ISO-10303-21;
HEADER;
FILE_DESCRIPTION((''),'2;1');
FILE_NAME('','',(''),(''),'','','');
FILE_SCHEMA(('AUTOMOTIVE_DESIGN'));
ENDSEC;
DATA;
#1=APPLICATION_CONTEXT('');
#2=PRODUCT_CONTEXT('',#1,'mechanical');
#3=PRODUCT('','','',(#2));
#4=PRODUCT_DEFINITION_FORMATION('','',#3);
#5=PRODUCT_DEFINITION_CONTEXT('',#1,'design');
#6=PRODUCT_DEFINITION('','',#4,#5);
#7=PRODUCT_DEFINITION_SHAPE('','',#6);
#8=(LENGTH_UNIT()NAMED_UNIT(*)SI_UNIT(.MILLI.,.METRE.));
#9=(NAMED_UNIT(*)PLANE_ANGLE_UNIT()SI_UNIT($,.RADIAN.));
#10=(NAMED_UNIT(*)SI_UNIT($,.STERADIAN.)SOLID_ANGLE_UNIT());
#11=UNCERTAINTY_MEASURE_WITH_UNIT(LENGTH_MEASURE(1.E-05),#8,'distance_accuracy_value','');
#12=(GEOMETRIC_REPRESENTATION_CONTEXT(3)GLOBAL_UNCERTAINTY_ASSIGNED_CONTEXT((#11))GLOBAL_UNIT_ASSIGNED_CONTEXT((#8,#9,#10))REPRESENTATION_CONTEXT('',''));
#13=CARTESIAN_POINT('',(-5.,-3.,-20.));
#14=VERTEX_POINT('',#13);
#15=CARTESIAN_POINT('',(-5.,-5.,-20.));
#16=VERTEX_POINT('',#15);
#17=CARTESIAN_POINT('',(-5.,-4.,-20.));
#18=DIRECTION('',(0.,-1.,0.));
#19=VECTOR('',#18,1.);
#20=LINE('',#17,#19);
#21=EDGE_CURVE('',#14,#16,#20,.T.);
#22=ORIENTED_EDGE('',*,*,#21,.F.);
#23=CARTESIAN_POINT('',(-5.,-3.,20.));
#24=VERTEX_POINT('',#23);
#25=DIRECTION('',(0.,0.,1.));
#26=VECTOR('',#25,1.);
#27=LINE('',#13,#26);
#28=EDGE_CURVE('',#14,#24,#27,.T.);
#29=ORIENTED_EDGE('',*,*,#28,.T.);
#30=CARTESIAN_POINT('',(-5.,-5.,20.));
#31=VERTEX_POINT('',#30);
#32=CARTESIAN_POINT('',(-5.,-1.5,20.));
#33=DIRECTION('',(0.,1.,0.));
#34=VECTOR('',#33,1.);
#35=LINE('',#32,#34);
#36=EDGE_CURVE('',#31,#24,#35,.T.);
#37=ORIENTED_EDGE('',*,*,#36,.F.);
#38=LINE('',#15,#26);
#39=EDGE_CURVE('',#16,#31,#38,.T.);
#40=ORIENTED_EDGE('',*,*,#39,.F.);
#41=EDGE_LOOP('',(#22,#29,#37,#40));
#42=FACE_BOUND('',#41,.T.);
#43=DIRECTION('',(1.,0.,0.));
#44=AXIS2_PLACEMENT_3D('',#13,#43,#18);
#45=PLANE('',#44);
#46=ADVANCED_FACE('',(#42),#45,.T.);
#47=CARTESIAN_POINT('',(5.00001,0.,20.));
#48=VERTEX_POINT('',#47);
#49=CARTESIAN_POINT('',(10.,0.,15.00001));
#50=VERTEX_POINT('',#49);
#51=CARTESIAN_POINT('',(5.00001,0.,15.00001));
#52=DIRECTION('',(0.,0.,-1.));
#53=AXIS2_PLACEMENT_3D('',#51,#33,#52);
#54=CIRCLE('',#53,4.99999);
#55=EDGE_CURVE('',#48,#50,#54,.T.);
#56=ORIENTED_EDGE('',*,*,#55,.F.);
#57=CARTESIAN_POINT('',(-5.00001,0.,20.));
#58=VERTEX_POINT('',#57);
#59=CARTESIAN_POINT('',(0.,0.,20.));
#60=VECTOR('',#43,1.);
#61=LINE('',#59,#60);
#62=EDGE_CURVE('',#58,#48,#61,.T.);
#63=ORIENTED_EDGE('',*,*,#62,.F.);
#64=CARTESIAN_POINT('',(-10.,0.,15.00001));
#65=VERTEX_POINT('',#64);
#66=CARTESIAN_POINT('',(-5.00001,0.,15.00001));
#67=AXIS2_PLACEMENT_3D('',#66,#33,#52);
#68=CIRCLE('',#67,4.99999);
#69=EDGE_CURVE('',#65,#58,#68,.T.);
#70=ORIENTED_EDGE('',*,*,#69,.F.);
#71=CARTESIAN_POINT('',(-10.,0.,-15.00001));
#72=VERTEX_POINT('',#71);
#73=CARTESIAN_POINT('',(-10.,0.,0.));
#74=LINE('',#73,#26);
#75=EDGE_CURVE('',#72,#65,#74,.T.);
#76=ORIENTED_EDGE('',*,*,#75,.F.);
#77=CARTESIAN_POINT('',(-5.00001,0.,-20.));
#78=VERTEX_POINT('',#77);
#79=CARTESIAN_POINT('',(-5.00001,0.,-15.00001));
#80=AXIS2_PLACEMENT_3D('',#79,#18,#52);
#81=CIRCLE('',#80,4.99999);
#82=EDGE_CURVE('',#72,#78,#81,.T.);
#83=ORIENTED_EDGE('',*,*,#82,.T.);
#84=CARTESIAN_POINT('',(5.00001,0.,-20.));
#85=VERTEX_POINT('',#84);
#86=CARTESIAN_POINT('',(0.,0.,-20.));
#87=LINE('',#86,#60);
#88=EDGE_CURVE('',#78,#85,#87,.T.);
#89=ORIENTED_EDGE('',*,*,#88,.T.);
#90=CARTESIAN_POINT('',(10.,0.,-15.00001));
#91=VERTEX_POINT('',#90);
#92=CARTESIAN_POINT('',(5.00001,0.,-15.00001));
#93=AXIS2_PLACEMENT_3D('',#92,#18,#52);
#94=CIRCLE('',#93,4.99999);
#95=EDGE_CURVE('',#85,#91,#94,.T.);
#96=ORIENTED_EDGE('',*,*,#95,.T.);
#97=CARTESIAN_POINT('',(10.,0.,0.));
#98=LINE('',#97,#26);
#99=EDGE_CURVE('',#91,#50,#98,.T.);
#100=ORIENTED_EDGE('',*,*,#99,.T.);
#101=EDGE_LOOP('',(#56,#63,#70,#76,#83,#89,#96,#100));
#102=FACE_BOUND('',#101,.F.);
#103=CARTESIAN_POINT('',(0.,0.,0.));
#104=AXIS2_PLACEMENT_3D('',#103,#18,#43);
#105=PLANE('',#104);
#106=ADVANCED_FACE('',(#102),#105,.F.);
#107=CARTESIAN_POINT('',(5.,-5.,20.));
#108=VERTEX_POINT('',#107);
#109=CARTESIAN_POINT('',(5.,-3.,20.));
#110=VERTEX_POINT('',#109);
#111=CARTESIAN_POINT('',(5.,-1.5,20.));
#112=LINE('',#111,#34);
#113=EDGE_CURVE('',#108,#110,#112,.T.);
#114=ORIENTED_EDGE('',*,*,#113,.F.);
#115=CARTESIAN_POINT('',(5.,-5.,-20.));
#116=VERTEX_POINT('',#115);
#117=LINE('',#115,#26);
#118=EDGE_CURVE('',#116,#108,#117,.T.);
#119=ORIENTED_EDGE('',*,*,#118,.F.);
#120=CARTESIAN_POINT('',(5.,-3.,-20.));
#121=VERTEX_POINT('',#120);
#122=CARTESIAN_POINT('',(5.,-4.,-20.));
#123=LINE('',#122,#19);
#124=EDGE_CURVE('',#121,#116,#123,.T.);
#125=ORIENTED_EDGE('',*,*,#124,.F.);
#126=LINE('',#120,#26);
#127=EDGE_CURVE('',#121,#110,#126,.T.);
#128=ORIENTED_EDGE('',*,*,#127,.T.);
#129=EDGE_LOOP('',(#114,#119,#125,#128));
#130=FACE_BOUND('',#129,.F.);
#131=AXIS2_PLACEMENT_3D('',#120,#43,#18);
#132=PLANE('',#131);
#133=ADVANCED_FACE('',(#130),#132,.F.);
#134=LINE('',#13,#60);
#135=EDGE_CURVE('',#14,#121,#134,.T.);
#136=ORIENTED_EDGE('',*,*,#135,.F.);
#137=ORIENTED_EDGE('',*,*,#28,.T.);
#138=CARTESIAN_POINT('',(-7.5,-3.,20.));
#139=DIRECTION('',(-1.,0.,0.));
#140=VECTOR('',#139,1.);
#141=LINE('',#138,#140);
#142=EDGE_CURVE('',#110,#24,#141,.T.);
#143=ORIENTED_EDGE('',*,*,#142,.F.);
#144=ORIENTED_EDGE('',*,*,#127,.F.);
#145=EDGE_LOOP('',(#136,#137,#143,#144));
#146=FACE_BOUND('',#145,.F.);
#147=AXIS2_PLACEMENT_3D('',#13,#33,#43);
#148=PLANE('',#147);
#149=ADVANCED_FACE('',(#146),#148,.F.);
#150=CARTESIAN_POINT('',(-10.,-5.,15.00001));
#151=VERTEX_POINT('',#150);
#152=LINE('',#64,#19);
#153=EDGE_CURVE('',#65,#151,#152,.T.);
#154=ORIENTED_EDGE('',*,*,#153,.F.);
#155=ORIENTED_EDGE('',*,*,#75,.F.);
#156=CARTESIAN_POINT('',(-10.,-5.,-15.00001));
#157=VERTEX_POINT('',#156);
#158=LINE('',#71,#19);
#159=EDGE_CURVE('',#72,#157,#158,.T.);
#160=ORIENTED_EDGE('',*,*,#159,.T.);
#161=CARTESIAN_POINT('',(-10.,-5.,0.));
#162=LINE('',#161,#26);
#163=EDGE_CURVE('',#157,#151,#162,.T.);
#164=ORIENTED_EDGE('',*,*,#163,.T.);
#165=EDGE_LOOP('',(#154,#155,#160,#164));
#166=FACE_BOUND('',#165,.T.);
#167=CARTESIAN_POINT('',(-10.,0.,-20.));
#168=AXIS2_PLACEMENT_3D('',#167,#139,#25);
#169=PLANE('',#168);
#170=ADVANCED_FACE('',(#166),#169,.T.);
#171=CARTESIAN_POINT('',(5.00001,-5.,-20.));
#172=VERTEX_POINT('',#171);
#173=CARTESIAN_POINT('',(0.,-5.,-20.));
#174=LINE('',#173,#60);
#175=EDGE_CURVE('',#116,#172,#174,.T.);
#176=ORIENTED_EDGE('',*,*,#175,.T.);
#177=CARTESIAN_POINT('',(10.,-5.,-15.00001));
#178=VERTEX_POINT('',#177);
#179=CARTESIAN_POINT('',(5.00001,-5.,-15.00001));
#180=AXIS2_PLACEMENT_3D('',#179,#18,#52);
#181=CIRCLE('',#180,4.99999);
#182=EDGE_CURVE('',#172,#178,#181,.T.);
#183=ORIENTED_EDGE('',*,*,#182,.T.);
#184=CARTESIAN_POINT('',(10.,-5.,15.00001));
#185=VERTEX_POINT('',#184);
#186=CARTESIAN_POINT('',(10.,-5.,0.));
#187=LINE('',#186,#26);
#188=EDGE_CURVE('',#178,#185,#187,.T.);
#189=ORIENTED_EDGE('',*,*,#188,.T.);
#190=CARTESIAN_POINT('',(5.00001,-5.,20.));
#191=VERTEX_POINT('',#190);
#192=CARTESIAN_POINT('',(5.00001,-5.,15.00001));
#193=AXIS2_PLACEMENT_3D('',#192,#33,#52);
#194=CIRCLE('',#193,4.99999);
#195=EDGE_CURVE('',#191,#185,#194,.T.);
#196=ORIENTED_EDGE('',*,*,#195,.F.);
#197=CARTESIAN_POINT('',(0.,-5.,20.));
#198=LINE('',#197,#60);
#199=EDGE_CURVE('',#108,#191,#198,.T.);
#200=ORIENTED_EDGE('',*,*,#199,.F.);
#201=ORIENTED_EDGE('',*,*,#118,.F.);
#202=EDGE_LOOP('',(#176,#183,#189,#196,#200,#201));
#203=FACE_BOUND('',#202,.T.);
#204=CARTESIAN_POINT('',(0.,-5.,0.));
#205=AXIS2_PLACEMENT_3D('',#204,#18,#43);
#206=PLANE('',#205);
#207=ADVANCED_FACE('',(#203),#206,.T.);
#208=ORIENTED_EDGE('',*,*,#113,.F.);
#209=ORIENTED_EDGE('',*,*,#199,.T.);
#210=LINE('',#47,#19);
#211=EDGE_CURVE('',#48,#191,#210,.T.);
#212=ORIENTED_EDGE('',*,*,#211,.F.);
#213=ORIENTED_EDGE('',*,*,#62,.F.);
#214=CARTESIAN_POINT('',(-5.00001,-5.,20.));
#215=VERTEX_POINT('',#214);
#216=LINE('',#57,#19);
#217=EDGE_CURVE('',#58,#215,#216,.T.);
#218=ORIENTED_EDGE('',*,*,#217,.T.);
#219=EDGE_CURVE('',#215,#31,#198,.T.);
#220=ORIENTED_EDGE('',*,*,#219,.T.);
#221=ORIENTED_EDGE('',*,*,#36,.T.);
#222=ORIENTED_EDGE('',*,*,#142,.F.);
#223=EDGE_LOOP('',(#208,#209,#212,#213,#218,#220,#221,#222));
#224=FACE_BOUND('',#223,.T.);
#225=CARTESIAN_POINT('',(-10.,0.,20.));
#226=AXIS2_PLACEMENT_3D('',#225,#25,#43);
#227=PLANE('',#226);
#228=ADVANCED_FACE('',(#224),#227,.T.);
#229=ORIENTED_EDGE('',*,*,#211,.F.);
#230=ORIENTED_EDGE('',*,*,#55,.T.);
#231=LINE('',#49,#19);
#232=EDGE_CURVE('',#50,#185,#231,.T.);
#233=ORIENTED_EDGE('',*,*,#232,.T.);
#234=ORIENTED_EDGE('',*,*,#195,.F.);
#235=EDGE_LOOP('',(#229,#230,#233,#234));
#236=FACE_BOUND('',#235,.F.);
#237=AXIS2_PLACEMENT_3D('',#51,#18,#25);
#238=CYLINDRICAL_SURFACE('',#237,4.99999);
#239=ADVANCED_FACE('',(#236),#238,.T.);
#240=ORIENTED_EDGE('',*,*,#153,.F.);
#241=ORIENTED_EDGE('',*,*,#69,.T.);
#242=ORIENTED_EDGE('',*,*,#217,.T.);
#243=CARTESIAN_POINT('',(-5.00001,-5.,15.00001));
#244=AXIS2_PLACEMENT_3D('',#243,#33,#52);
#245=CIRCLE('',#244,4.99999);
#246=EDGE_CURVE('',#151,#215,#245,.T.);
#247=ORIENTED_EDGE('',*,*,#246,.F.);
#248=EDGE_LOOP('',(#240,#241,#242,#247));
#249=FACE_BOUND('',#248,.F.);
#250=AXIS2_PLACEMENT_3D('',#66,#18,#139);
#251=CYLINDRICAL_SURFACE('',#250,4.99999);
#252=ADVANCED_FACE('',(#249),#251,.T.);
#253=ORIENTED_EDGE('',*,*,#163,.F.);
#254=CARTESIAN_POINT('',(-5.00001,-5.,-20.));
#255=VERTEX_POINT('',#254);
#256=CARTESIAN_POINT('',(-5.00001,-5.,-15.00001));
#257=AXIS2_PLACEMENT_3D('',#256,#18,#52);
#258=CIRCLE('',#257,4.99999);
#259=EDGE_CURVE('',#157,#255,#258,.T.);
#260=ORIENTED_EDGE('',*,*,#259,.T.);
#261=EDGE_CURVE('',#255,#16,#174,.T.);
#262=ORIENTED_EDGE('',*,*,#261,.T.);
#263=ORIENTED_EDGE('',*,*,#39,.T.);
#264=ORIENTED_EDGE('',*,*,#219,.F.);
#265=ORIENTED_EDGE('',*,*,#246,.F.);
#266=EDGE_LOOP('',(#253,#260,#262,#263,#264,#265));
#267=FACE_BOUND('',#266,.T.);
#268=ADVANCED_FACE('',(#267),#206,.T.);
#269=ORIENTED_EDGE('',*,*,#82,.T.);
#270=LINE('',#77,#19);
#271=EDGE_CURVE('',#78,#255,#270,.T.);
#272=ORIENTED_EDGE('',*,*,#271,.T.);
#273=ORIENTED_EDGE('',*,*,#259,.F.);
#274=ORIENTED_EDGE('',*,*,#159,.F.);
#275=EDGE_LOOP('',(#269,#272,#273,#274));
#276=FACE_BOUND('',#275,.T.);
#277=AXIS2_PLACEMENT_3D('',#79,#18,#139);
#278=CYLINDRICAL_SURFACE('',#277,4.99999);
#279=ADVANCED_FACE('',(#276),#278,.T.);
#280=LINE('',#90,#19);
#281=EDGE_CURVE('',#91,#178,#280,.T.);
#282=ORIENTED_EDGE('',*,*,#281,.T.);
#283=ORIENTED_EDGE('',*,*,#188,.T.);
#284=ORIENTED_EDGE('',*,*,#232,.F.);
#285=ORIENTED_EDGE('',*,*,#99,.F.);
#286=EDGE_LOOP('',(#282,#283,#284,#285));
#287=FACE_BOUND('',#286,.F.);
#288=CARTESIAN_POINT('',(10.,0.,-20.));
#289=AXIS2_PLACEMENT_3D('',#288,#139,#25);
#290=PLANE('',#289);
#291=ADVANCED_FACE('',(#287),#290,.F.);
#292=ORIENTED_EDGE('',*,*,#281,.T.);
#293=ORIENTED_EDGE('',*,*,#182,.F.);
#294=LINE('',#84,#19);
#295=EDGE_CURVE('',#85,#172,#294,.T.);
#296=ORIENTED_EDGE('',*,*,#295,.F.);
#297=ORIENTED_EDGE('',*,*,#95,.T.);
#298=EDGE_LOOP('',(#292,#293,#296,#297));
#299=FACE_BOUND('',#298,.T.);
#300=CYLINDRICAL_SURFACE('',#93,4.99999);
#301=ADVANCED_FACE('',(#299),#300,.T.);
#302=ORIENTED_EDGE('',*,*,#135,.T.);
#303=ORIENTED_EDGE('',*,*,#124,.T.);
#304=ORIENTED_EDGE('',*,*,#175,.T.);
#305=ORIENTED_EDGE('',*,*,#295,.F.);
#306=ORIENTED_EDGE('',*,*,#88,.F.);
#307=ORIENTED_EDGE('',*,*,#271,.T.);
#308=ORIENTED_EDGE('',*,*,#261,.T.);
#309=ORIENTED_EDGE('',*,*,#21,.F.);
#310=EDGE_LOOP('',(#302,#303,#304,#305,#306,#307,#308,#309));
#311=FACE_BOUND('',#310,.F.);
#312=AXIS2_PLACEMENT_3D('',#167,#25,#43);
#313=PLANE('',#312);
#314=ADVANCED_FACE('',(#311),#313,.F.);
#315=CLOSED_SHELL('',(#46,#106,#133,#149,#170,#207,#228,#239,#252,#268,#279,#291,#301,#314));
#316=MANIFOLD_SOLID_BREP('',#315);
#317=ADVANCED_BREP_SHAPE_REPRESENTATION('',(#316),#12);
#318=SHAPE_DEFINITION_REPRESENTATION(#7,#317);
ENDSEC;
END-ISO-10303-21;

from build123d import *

# Parameters (mm, degrees)
F0_W     = 20
F0_H     = 40
F1_DEPTH = 5
F2_W     = 5
F2_H     = 2
F3_DEPTH = 40.001
F4_R     = 4.99999


# Not quite as in the source:
# - a fillet or chamfer is up to 0.001 mm smaller than in the source, because OpenCascade refuses the exact size


with BuildPart() as f1:
    # F0 (on Front) → F1 (new body)
    with BuildSketch(Plane.XZ):
        Rectangle(F0_W, F0_H)
    extrude(amount=F1_DEPTH)

    # F2 (on face) → F3 (cut, through all)
    with BuildSketch(Plane(origin=(0, 0, -20), x_dir=(1, 0, 0), z_dir=(0, 0, -1))):
        with Locations((-2.5, 4)):
            Rectangle(F2_W, F2_H)
        with Locations((2.5, 4)):
            Rectangle(F2_W, F2_H)
    extrude(amount=-F3_DEPTH, mode=Mode.SUBTRACT)

    # F4 (radius 5 in the source; OpenCascade refuses exactly that, so slightly less here)
    f4_edges = [f1.edges().sort_by_distance(p)[0] for p in [
        (-10, -2.5, -20),
        (10, -2.5, -20),
        (-10, -2.5, 20),
        (10, -2.5, 20),
    ]]
    fillet(f4_edges, radius=F4_R)


solid = f1.part
